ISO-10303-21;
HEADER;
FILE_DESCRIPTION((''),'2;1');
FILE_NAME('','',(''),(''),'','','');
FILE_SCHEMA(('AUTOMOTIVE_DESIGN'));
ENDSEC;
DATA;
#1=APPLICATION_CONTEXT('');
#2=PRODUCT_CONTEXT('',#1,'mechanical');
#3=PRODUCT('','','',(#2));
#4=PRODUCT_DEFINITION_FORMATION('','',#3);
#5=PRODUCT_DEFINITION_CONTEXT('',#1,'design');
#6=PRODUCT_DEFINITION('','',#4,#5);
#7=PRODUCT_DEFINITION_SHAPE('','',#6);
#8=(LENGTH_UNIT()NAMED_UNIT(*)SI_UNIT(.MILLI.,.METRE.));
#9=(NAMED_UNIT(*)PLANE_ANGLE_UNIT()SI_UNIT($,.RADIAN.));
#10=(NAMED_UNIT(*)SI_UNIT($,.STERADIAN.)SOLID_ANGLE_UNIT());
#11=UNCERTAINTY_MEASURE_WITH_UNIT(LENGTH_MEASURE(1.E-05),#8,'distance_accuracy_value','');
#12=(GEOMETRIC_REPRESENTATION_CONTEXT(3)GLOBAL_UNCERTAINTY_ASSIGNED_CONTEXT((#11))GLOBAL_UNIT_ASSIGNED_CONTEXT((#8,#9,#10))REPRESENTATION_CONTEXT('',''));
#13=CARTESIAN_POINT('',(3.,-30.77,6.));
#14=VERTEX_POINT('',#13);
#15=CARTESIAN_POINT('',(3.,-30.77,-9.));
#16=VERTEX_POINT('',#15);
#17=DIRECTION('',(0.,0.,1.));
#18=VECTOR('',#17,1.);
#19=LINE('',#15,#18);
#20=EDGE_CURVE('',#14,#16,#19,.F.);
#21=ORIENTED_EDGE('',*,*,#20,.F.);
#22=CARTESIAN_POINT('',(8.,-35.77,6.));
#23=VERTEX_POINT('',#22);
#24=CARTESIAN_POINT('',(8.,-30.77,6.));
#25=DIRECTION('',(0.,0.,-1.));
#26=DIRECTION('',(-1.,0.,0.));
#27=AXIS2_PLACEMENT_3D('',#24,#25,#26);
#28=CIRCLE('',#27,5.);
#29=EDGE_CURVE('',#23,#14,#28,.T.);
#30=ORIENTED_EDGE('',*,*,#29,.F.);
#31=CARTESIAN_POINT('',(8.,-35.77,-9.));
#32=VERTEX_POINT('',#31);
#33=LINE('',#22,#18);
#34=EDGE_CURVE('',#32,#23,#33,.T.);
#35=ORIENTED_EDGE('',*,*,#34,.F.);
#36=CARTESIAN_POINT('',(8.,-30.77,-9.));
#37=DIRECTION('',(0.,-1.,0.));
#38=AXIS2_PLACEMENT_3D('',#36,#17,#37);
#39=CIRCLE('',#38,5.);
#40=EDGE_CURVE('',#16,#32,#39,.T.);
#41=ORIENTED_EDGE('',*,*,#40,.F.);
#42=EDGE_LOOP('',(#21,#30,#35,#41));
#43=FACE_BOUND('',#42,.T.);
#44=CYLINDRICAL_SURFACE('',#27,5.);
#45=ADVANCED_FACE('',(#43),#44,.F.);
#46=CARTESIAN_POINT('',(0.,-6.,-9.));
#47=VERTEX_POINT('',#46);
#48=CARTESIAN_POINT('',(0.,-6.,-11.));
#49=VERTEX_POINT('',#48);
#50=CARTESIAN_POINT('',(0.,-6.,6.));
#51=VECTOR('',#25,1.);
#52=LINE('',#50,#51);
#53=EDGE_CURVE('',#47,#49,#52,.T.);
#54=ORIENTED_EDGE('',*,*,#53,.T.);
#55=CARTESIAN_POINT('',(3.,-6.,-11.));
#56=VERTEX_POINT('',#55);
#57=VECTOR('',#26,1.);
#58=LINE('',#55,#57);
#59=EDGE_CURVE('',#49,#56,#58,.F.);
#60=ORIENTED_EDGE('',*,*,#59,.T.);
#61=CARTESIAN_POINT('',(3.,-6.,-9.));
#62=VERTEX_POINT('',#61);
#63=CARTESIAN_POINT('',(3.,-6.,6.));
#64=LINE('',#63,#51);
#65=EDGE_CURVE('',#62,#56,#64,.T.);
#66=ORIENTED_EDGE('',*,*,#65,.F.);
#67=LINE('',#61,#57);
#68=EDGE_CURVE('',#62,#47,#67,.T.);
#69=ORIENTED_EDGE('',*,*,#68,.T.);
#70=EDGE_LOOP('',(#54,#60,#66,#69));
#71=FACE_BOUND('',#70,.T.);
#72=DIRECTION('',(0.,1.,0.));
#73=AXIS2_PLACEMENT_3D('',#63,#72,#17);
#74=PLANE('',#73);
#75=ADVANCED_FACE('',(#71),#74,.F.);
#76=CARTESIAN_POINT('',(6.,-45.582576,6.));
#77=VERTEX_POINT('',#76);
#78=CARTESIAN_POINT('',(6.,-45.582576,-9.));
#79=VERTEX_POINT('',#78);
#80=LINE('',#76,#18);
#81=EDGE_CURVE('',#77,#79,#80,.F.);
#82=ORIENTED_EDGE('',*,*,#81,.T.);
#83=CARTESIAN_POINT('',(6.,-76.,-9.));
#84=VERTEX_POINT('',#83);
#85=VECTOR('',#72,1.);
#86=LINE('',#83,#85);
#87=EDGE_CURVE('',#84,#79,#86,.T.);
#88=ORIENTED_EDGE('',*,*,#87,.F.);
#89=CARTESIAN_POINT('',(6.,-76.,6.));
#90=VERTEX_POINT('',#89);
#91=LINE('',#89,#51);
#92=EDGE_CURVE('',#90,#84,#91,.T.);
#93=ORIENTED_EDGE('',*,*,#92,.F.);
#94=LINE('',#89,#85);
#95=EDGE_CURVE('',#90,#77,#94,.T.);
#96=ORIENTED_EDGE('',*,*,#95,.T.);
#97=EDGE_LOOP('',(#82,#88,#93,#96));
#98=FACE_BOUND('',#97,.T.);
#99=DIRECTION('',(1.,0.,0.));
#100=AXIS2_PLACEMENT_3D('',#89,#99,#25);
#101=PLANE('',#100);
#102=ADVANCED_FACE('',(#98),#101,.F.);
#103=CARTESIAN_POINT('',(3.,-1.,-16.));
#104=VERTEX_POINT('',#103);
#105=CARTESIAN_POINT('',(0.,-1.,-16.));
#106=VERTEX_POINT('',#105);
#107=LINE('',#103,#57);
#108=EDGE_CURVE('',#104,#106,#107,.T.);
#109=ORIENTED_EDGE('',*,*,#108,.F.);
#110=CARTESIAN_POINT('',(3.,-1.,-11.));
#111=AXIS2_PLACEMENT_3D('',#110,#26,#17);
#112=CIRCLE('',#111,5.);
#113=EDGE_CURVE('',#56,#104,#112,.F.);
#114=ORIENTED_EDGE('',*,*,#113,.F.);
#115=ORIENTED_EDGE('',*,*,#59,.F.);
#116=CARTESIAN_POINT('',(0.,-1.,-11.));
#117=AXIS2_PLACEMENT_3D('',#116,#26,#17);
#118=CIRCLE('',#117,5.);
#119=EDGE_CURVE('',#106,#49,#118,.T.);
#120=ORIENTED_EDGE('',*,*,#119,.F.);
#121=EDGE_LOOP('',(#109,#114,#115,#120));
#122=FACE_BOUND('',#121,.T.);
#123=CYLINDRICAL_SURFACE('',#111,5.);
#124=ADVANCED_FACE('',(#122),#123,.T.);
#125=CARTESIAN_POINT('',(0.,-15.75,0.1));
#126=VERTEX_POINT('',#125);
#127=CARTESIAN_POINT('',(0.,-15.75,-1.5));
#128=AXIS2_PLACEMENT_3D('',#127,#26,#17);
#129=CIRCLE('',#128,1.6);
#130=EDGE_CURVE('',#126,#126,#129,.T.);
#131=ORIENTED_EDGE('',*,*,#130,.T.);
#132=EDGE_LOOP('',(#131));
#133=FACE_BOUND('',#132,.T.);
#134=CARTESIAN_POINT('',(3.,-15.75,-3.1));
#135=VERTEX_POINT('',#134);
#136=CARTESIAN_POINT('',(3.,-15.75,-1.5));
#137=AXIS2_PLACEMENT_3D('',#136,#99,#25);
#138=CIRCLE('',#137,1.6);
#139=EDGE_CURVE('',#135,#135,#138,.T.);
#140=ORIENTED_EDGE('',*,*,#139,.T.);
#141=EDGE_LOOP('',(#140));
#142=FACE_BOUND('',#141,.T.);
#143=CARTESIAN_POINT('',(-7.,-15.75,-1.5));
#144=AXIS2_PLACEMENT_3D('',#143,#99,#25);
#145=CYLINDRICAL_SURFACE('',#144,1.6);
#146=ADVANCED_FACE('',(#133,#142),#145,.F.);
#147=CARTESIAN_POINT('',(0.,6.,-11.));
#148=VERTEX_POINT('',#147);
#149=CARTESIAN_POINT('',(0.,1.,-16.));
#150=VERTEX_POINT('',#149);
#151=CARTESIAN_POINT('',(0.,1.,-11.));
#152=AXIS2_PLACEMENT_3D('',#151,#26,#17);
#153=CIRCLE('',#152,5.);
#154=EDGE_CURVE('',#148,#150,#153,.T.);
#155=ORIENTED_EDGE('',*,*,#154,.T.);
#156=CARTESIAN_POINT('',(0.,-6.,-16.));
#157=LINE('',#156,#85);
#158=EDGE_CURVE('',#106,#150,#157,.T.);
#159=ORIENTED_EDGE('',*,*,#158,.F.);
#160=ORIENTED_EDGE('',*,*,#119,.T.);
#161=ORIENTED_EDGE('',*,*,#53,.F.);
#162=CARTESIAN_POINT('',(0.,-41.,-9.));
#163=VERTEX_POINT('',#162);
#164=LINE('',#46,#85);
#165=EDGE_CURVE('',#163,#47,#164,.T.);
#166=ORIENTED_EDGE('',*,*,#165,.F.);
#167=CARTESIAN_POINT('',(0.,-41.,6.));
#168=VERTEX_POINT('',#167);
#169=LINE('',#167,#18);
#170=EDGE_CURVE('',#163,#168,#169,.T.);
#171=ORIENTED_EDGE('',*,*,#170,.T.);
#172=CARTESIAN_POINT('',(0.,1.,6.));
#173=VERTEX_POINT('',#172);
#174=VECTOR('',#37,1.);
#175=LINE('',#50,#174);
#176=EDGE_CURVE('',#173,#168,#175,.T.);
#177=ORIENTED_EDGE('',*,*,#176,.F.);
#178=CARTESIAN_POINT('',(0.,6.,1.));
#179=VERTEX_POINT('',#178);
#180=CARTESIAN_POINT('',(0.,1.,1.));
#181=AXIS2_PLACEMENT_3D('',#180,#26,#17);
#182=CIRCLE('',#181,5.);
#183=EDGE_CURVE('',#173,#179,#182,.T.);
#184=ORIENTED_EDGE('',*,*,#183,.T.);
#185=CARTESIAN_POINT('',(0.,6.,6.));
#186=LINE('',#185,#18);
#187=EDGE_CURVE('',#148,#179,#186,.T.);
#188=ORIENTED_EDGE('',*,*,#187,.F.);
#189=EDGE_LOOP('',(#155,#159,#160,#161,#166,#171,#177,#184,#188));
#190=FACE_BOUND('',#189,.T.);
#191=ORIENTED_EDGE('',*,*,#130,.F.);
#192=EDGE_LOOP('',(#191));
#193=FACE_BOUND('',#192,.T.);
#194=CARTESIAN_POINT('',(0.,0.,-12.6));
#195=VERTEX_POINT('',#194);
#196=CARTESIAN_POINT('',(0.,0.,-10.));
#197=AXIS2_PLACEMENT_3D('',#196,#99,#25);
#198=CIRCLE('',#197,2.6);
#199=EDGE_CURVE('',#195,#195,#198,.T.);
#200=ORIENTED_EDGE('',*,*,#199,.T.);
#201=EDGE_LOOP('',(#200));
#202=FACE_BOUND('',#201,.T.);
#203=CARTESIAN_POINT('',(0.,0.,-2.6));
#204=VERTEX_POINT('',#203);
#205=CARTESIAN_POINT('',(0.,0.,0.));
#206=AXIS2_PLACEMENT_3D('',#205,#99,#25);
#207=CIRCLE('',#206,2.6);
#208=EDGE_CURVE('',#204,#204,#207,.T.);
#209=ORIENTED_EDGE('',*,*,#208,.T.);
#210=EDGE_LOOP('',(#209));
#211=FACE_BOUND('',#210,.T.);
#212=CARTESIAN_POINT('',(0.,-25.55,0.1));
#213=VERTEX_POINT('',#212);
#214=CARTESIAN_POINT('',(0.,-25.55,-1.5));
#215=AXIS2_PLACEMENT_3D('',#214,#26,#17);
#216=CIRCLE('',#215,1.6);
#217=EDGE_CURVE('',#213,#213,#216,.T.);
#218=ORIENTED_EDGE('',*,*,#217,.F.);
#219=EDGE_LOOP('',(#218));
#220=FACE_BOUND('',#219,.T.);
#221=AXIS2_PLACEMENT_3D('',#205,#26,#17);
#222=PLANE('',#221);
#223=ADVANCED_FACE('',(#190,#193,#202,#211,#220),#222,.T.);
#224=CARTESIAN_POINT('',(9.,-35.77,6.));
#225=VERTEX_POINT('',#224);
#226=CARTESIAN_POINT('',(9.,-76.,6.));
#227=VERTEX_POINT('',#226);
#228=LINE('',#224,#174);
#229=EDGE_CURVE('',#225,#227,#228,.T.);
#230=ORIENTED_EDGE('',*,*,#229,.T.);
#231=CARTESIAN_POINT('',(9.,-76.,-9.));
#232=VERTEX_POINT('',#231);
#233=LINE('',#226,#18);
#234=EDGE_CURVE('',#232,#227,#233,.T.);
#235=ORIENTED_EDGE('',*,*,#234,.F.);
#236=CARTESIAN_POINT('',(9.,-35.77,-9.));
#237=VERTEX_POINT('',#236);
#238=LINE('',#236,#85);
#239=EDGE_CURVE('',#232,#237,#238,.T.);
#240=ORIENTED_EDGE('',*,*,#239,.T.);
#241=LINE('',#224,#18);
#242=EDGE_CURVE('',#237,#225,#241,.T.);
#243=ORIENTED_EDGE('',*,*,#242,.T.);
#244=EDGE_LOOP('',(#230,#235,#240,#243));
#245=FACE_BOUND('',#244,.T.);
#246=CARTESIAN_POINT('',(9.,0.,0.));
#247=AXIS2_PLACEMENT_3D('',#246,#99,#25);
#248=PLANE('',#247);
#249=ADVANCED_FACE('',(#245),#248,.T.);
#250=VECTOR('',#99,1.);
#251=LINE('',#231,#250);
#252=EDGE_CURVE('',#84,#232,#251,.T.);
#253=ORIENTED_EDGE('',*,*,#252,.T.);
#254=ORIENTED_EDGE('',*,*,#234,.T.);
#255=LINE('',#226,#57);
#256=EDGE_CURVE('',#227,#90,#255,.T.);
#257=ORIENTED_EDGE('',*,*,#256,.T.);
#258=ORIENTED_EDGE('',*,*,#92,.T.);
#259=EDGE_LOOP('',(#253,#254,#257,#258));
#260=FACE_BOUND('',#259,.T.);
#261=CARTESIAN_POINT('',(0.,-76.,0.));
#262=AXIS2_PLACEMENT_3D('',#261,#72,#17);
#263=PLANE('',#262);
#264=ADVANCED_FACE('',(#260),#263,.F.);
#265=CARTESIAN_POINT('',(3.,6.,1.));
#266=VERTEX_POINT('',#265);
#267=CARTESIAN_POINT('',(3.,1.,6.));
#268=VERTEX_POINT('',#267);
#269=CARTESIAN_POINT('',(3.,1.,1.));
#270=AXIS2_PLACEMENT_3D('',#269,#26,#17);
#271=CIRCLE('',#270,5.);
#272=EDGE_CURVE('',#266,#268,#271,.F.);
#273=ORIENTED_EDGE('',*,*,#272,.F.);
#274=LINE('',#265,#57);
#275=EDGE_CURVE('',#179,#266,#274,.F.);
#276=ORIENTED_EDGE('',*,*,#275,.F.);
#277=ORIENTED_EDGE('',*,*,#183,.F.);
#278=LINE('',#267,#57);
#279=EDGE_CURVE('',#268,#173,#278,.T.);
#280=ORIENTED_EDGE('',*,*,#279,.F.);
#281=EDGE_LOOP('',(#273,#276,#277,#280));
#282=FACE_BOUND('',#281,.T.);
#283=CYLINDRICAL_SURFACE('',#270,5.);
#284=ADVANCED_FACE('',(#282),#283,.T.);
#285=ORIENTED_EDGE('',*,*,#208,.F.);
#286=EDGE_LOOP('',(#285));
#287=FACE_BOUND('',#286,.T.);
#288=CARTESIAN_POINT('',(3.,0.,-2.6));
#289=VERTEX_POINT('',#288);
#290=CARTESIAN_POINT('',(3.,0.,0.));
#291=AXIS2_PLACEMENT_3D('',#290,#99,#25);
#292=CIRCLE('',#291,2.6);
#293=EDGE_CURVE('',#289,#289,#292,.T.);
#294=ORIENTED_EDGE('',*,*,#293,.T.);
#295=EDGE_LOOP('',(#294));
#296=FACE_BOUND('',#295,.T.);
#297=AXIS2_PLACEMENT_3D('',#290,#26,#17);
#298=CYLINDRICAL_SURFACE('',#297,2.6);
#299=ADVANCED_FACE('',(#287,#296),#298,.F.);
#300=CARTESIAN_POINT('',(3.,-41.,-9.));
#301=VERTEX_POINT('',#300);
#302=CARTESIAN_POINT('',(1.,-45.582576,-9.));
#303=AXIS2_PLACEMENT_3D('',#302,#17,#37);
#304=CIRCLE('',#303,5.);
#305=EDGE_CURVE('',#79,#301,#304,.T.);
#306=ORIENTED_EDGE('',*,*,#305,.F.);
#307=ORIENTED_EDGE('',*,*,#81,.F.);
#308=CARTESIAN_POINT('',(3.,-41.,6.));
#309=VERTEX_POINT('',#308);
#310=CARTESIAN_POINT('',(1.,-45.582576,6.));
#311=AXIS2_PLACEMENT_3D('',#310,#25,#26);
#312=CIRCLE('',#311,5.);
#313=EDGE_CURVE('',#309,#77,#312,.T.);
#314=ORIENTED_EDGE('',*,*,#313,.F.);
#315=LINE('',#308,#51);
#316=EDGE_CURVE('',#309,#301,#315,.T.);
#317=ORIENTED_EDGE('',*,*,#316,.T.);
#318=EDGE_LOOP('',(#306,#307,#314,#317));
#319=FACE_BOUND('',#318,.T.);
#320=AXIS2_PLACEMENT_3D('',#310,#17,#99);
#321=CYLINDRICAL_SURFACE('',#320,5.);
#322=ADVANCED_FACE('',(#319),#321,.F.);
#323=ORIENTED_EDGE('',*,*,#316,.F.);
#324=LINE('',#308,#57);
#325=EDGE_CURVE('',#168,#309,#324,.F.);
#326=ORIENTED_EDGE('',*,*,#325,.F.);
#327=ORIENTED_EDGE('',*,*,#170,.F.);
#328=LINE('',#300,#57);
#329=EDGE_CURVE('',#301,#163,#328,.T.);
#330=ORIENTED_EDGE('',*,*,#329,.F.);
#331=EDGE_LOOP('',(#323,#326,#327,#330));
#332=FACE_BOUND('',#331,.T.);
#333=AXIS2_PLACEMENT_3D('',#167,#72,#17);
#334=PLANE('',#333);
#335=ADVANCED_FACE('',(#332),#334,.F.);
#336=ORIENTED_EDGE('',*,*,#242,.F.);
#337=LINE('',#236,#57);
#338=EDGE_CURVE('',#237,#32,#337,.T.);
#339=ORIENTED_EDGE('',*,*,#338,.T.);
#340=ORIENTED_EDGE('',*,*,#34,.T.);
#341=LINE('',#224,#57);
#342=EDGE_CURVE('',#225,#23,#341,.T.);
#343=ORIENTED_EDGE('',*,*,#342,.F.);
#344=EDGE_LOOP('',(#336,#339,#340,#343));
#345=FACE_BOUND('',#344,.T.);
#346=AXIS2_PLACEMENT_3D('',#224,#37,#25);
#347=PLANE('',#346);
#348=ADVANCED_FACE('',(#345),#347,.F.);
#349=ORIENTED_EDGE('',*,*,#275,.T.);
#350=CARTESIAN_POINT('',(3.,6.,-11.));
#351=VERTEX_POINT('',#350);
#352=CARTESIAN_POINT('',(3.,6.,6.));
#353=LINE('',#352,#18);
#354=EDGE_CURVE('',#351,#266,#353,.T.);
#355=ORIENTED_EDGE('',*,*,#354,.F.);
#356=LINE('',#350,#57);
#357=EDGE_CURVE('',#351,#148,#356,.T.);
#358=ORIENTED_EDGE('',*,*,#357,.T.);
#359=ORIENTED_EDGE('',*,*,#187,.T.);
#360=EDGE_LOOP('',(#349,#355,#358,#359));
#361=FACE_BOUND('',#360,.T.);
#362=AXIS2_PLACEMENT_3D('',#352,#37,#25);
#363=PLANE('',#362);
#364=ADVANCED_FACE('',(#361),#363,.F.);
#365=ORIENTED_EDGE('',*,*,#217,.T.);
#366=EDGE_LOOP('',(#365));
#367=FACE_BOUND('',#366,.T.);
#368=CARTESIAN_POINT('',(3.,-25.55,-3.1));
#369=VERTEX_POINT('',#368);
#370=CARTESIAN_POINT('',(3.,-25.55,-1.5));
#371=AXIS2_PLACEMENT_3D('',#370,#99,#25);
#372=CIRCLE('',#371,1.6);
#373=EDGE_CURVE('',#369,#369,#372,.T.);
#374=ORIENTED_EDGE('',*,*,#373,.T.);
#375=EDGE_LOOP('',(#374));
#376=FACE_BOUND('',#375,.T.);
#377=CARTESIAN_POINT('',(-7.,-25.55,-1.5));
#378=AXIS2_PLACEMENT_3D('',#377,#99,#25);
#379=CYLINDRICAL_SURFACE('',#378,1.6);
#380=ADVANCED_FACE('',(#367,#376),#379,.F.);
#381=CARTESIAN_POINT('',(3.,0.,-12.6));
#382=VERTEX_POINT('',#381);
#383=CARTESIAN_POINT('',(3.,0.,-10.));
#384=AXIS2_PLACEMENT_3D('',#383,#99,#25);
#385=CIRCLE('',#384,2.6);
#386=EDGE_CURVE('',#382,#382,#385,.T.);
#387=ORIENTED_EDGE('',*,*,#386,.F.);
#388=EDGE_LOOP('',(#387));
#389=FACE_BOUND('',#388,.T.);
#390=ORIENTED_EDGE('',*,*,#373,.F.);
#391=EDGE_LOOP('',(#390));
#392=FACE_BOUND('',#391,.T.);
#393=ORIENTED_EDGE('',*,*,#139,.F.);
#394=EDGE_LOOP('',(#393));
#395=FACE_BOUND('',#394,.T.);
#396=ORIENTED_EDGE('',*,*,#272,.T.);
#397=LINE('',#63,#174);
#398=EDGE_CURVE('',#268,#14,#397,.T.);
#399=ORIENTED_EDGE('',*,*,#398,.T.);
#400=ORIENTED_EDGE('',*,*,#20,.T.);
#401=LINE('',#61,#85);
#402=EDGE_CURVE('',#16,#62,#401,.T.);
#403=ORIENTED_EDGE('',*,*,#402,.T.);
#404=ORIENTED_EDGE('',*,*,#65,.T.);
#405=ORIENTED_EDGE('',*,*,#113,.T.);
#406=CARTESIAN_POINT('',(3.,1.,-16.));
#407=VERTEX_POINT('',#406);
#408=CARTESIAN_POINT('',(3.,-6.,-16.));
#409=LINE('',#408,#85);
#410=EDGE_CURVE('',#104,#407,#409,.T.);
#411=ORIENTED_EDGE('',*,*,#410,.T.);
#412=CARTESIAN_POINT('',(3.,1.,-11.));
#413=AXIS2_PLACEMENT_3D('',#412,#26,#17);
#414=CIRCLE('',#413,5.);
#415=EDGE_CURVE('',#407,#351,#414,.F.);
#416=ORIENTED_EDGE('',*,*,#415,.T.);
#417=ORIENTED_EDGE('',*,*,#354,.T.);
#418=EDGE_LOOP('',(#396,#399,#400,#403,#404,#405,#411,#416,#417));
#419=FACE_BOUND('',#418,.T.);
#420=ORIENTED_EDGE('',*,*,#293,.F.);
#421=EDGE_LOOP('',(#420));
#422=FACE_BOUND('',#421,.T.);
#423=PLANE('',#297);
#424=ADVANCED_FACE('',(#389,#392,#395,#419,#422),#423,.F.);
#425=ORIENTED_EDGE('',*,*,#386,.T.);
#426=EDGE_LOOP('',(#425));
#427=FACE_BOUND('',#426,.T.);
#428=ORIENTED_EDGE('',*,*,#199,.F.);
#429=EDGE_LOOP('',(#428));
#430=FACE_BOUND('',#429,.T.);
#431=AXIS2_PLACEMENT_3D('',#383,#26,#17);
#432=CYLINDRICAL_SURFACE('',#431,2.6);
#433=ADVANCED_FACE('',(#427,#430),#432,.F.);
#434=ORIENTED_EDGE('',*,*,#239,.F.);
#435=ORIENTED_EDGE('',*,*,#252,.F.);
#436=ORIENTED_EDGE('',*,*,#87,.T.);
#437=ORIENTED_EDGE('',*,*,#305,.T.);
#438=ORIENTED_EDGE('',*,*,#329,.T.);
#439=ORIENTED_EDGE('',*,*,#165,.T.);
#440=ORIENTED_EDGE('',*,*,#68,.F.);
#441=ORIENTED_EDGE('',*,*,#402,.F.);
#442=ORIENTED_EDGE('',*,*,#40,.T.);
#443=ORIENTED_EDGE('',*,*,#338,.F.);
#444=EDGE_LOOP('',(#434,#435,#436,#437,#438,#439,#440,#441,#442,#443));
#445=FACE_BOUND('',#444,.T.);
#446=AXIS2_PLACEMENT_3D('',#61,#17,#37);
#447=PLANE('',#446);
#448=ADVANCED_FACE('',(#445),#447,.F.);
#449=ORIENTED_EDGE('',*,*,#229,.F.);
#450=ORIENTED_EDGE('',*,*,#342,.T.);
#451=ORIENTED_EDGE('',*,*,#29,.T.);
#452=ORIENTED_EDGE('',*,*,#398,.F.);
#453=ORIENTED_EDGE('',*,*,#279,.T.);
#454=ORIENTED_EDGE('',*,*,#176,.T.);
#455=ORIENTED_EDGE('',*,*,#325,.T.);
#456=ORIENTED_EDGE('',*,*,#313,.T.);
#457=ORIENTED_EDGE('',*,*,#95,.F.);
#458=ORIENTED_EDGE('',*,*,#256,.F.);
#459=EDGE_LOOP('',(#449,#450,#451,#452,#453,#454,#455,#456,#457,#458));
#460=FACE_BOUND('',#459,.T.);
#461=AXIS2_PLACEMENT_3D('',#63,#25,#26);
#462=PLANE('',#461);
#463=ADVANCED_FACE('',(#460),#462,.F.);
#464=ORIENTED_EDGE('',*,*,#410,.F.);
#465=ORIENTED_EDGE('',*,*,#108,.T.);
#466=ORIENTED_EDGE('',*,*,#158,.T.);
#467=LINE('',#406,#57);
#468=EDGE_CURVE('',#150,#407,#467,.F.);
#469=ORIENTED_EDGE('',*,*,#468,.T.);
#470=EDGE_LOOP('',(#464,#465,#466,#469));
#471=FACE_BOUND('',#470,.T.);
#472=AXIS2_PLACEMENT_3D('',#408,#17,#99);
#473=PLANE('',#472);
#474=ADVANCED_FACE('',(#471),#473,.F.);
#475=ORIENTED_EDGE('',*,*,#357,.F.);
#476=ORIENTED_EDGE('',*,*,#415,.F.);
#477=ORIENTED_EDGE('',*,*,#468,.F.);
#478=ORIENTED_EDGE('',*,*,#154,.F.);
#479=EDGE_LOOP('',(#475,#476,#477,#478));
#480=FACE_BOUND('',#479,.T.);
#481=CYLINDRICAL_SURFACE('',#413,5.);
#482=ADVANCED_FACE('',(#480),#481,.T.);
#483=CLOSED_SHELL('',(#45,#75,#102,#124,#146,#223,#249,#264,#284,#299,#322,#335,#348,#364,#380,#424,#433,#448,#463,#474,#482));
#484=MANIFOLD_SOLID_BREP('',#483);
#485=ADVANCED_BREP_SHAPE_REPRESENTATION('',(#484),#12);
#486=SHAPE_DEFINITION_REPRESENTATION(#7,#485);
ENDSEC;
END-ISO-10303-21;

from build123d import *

# Parameters (mm, degrees)
SKETCH1_W           = 22
SKETCH1_H           = 12
SKETCH1_R           = 2.6
BOSS_EXTRUDE1_DEPTH = 3
SKETCH2_W           = 15
SKETCH2_H           = 36
BOSS_EXTRUDE2_DEPTH = 3
FILLET1_R           = 5
FILLET2_R           = 1
SKETCH4_W           = 15
SKETCH4_H           = 34.286255804
BOSS_EXTRUDE3_DEPTH = 12.2
SKETCH7_W           = 12.2
SKETCH7_H           = 15
CUT_EXTRUDE3_DEPTH  = 50
SKETCH8_R           = 1.6
CUT_EXTRUDE4_DEPTH  = 10
SKETCH9_W           = 15
SKETCH9_H           = 5.23
BOSS_EXTRUDE4_DEPTH = 6
SKETCH10_W          = 3
SKETCH10_H          = 15
BOSS_EXTRUDE5_DEPTH = 35
FILLET3_R           = 5
FILLET4_R           = 5
SKETCH11_W          = 15.033805152
SKETCH11_H          = 2.020668066
CUT_EXTRUDE5_DEPTH  = 3


with BuildPart() as part:
    # Sketch1 → Boss-Extrude1 (new body)
    with BuildSketch(Plane(origin=(0, 0, 0), x_dir=(0, 0, -1), z_dir=(1, 0, 0))):
        with Locations((5, 0)):
            Rectangle(SKETCH1_W, SKETCH1_H)
        with Locations((10, 0)):
            Circle(SKETCH1_R, mode=Mode.SUBTRACT)
        Circle(SKETCH1_R, mode=Mode.SUBTRACT)
    extrude(amount=BOSS_EXTRUDE1_DEPTH)

    # Sketch2 → Boss-Extrude2 (add)
    with BuildSketch(Plane(origin=(0, 0, 0), x_dir=(0, 0, -1), z_dir=(1, 0, 0))):
        with Locations((1.5, -24)):
            Rectangle(SKETCH2_W, SKETCH2_H)
    extrude(amount=BOSS_EXTRUDE2_DEPTH)

    # Fillet1
    fillet1_edges = [part.edges().sort_by_distance(p)[0] for p in [
        (1.5, -6, -16),
        (1.5, 6, 6),
        (1.5, 6, -16),
    ]]
    fillet(fillet1_edges, radius=FILLET1_R)

    # Fillet2
    fillet2_edges = [part.edges().sort_by_distance(p)[0] for p in [
        (1.5, -42, 6),
        (1.5, -42, -9),
    ]]
    fillet(fillet2_edges, radius=FILLET2_R)

    # Sketch4 → Boss-Extrude3 (add)
    with BuildSketch(Plane(origin=(3, 0, 0), x_dir=(0, 0, -1), z_dir=(1, 0, 0))):
        with Locations((1.5, -23.856872098)):
            Rectangle(SKETCH4_W, SKETCH4_H)
    extrude(amount=BOSS_EXTRUDE3_DEPTH)

    # Sketch7 → Cut-Extrude3 (cut)
    with BuildSketch(Plane(origin=(0, -6.713744196, 0), x_dir=(1, 0, 0), z_dir=(0, 1, 0))):
        with Locations((9.1, 1.5)):
            Rectangle(SKETCH7_W, SKETCH7_H)
    extrude(amount=-CUT_EXTRUDE3_DEPTH, mode=Mode.SUBTRACT)

    # Sketch8 → Cut-Extrude4 (cut)
    with BuildSketch(Plane(origin=(3, 0, 0), x_dir=(0, 0, -1), z_dir=(1, 0, 0))):
        with Locations((1.5, -15.75)):
            Circle(SKETCH8_R)
        with Locations((1.5, -25.55)):
            Circle(SKETCH8_R)
    extrude(amount=-CUT_EXTRUDE4_DEPTH, mode=Mode.SUBTRACT)

    # Sketch9 → Boss-Extrude4 (add)
    with BuildSketch(Plane(origin=(3, 0, 0), x_dir=(0, 0, -1), z_dir=(1, 0, 0))):
        with Locations((1.5, -38.385)):
            Rectangle(SKETCH9_W, SKETCH9_H)
    extrude(amount=BOSS_EXTRUDE4_DEPTH)

    # Sketch10 → Boss-Extrude5 (add)
    with BuildSketch(Plane(origin=(0, -41, 0), x_dir=(-1, 0, 0), z_dir=(0, -1, 0))):
        with Locations((-7.5, 1.5)):
            Rectangle(SKETCH10_W, SKETCH10_H)
    extrude(amount=BOSS_EXTRUDE5_DEPTH)

    # Fillet3
    # the kernel refuses this fillet: 5 mm, written as the material it adds along each edge
    with BuildSketch(Plane(origin=(6, -41, 6), x_dir=(0, -1, 0), z_dir=(0, 0, -1))) as fillet3_piece_1:
        with BuildLine():
            CenterArc((4.582575695, 5), FILLET3_R, 203.578178478, 66.421821522)
            Line((0, 3), (-0.091651514, 2.96))
            ThreePointArc((-0.091651514, 2.96), (-0.1, 1.5), (-0.1, 0))
            Line((-0.1, 0), (0, -0.1))
            Line((0, -0.1), (4.582575695, -0.1))
            Line((4.582575695, -0.1), (4.582575695, 0))
        make_face()
    extrude(amount=15)

    # Fillet4
    fillet4_edges = [part.edges().sort_by_distance(p)[0] for p in [
        (3, -35.77, -1.5),
    ]]
    fillet(fillet4_edges, radius=FILLET4_R)

    # Sketch11 → Cut-Extrude5 (cut)
    with BuildSketch(Plane(origin=(3, 0, 0), x_dir=(0, 0, -1), z_dir=(1, 0, 0))):
        with Locations((1.516902576, -42.010334033)):
            Rectangle(SKETCH11_W, SKETCH11_H)
    extrude(amount=-CUT_EXTRUDE5_DEPTH, mode=Mode.SUBTRACT)


solid = part.part
